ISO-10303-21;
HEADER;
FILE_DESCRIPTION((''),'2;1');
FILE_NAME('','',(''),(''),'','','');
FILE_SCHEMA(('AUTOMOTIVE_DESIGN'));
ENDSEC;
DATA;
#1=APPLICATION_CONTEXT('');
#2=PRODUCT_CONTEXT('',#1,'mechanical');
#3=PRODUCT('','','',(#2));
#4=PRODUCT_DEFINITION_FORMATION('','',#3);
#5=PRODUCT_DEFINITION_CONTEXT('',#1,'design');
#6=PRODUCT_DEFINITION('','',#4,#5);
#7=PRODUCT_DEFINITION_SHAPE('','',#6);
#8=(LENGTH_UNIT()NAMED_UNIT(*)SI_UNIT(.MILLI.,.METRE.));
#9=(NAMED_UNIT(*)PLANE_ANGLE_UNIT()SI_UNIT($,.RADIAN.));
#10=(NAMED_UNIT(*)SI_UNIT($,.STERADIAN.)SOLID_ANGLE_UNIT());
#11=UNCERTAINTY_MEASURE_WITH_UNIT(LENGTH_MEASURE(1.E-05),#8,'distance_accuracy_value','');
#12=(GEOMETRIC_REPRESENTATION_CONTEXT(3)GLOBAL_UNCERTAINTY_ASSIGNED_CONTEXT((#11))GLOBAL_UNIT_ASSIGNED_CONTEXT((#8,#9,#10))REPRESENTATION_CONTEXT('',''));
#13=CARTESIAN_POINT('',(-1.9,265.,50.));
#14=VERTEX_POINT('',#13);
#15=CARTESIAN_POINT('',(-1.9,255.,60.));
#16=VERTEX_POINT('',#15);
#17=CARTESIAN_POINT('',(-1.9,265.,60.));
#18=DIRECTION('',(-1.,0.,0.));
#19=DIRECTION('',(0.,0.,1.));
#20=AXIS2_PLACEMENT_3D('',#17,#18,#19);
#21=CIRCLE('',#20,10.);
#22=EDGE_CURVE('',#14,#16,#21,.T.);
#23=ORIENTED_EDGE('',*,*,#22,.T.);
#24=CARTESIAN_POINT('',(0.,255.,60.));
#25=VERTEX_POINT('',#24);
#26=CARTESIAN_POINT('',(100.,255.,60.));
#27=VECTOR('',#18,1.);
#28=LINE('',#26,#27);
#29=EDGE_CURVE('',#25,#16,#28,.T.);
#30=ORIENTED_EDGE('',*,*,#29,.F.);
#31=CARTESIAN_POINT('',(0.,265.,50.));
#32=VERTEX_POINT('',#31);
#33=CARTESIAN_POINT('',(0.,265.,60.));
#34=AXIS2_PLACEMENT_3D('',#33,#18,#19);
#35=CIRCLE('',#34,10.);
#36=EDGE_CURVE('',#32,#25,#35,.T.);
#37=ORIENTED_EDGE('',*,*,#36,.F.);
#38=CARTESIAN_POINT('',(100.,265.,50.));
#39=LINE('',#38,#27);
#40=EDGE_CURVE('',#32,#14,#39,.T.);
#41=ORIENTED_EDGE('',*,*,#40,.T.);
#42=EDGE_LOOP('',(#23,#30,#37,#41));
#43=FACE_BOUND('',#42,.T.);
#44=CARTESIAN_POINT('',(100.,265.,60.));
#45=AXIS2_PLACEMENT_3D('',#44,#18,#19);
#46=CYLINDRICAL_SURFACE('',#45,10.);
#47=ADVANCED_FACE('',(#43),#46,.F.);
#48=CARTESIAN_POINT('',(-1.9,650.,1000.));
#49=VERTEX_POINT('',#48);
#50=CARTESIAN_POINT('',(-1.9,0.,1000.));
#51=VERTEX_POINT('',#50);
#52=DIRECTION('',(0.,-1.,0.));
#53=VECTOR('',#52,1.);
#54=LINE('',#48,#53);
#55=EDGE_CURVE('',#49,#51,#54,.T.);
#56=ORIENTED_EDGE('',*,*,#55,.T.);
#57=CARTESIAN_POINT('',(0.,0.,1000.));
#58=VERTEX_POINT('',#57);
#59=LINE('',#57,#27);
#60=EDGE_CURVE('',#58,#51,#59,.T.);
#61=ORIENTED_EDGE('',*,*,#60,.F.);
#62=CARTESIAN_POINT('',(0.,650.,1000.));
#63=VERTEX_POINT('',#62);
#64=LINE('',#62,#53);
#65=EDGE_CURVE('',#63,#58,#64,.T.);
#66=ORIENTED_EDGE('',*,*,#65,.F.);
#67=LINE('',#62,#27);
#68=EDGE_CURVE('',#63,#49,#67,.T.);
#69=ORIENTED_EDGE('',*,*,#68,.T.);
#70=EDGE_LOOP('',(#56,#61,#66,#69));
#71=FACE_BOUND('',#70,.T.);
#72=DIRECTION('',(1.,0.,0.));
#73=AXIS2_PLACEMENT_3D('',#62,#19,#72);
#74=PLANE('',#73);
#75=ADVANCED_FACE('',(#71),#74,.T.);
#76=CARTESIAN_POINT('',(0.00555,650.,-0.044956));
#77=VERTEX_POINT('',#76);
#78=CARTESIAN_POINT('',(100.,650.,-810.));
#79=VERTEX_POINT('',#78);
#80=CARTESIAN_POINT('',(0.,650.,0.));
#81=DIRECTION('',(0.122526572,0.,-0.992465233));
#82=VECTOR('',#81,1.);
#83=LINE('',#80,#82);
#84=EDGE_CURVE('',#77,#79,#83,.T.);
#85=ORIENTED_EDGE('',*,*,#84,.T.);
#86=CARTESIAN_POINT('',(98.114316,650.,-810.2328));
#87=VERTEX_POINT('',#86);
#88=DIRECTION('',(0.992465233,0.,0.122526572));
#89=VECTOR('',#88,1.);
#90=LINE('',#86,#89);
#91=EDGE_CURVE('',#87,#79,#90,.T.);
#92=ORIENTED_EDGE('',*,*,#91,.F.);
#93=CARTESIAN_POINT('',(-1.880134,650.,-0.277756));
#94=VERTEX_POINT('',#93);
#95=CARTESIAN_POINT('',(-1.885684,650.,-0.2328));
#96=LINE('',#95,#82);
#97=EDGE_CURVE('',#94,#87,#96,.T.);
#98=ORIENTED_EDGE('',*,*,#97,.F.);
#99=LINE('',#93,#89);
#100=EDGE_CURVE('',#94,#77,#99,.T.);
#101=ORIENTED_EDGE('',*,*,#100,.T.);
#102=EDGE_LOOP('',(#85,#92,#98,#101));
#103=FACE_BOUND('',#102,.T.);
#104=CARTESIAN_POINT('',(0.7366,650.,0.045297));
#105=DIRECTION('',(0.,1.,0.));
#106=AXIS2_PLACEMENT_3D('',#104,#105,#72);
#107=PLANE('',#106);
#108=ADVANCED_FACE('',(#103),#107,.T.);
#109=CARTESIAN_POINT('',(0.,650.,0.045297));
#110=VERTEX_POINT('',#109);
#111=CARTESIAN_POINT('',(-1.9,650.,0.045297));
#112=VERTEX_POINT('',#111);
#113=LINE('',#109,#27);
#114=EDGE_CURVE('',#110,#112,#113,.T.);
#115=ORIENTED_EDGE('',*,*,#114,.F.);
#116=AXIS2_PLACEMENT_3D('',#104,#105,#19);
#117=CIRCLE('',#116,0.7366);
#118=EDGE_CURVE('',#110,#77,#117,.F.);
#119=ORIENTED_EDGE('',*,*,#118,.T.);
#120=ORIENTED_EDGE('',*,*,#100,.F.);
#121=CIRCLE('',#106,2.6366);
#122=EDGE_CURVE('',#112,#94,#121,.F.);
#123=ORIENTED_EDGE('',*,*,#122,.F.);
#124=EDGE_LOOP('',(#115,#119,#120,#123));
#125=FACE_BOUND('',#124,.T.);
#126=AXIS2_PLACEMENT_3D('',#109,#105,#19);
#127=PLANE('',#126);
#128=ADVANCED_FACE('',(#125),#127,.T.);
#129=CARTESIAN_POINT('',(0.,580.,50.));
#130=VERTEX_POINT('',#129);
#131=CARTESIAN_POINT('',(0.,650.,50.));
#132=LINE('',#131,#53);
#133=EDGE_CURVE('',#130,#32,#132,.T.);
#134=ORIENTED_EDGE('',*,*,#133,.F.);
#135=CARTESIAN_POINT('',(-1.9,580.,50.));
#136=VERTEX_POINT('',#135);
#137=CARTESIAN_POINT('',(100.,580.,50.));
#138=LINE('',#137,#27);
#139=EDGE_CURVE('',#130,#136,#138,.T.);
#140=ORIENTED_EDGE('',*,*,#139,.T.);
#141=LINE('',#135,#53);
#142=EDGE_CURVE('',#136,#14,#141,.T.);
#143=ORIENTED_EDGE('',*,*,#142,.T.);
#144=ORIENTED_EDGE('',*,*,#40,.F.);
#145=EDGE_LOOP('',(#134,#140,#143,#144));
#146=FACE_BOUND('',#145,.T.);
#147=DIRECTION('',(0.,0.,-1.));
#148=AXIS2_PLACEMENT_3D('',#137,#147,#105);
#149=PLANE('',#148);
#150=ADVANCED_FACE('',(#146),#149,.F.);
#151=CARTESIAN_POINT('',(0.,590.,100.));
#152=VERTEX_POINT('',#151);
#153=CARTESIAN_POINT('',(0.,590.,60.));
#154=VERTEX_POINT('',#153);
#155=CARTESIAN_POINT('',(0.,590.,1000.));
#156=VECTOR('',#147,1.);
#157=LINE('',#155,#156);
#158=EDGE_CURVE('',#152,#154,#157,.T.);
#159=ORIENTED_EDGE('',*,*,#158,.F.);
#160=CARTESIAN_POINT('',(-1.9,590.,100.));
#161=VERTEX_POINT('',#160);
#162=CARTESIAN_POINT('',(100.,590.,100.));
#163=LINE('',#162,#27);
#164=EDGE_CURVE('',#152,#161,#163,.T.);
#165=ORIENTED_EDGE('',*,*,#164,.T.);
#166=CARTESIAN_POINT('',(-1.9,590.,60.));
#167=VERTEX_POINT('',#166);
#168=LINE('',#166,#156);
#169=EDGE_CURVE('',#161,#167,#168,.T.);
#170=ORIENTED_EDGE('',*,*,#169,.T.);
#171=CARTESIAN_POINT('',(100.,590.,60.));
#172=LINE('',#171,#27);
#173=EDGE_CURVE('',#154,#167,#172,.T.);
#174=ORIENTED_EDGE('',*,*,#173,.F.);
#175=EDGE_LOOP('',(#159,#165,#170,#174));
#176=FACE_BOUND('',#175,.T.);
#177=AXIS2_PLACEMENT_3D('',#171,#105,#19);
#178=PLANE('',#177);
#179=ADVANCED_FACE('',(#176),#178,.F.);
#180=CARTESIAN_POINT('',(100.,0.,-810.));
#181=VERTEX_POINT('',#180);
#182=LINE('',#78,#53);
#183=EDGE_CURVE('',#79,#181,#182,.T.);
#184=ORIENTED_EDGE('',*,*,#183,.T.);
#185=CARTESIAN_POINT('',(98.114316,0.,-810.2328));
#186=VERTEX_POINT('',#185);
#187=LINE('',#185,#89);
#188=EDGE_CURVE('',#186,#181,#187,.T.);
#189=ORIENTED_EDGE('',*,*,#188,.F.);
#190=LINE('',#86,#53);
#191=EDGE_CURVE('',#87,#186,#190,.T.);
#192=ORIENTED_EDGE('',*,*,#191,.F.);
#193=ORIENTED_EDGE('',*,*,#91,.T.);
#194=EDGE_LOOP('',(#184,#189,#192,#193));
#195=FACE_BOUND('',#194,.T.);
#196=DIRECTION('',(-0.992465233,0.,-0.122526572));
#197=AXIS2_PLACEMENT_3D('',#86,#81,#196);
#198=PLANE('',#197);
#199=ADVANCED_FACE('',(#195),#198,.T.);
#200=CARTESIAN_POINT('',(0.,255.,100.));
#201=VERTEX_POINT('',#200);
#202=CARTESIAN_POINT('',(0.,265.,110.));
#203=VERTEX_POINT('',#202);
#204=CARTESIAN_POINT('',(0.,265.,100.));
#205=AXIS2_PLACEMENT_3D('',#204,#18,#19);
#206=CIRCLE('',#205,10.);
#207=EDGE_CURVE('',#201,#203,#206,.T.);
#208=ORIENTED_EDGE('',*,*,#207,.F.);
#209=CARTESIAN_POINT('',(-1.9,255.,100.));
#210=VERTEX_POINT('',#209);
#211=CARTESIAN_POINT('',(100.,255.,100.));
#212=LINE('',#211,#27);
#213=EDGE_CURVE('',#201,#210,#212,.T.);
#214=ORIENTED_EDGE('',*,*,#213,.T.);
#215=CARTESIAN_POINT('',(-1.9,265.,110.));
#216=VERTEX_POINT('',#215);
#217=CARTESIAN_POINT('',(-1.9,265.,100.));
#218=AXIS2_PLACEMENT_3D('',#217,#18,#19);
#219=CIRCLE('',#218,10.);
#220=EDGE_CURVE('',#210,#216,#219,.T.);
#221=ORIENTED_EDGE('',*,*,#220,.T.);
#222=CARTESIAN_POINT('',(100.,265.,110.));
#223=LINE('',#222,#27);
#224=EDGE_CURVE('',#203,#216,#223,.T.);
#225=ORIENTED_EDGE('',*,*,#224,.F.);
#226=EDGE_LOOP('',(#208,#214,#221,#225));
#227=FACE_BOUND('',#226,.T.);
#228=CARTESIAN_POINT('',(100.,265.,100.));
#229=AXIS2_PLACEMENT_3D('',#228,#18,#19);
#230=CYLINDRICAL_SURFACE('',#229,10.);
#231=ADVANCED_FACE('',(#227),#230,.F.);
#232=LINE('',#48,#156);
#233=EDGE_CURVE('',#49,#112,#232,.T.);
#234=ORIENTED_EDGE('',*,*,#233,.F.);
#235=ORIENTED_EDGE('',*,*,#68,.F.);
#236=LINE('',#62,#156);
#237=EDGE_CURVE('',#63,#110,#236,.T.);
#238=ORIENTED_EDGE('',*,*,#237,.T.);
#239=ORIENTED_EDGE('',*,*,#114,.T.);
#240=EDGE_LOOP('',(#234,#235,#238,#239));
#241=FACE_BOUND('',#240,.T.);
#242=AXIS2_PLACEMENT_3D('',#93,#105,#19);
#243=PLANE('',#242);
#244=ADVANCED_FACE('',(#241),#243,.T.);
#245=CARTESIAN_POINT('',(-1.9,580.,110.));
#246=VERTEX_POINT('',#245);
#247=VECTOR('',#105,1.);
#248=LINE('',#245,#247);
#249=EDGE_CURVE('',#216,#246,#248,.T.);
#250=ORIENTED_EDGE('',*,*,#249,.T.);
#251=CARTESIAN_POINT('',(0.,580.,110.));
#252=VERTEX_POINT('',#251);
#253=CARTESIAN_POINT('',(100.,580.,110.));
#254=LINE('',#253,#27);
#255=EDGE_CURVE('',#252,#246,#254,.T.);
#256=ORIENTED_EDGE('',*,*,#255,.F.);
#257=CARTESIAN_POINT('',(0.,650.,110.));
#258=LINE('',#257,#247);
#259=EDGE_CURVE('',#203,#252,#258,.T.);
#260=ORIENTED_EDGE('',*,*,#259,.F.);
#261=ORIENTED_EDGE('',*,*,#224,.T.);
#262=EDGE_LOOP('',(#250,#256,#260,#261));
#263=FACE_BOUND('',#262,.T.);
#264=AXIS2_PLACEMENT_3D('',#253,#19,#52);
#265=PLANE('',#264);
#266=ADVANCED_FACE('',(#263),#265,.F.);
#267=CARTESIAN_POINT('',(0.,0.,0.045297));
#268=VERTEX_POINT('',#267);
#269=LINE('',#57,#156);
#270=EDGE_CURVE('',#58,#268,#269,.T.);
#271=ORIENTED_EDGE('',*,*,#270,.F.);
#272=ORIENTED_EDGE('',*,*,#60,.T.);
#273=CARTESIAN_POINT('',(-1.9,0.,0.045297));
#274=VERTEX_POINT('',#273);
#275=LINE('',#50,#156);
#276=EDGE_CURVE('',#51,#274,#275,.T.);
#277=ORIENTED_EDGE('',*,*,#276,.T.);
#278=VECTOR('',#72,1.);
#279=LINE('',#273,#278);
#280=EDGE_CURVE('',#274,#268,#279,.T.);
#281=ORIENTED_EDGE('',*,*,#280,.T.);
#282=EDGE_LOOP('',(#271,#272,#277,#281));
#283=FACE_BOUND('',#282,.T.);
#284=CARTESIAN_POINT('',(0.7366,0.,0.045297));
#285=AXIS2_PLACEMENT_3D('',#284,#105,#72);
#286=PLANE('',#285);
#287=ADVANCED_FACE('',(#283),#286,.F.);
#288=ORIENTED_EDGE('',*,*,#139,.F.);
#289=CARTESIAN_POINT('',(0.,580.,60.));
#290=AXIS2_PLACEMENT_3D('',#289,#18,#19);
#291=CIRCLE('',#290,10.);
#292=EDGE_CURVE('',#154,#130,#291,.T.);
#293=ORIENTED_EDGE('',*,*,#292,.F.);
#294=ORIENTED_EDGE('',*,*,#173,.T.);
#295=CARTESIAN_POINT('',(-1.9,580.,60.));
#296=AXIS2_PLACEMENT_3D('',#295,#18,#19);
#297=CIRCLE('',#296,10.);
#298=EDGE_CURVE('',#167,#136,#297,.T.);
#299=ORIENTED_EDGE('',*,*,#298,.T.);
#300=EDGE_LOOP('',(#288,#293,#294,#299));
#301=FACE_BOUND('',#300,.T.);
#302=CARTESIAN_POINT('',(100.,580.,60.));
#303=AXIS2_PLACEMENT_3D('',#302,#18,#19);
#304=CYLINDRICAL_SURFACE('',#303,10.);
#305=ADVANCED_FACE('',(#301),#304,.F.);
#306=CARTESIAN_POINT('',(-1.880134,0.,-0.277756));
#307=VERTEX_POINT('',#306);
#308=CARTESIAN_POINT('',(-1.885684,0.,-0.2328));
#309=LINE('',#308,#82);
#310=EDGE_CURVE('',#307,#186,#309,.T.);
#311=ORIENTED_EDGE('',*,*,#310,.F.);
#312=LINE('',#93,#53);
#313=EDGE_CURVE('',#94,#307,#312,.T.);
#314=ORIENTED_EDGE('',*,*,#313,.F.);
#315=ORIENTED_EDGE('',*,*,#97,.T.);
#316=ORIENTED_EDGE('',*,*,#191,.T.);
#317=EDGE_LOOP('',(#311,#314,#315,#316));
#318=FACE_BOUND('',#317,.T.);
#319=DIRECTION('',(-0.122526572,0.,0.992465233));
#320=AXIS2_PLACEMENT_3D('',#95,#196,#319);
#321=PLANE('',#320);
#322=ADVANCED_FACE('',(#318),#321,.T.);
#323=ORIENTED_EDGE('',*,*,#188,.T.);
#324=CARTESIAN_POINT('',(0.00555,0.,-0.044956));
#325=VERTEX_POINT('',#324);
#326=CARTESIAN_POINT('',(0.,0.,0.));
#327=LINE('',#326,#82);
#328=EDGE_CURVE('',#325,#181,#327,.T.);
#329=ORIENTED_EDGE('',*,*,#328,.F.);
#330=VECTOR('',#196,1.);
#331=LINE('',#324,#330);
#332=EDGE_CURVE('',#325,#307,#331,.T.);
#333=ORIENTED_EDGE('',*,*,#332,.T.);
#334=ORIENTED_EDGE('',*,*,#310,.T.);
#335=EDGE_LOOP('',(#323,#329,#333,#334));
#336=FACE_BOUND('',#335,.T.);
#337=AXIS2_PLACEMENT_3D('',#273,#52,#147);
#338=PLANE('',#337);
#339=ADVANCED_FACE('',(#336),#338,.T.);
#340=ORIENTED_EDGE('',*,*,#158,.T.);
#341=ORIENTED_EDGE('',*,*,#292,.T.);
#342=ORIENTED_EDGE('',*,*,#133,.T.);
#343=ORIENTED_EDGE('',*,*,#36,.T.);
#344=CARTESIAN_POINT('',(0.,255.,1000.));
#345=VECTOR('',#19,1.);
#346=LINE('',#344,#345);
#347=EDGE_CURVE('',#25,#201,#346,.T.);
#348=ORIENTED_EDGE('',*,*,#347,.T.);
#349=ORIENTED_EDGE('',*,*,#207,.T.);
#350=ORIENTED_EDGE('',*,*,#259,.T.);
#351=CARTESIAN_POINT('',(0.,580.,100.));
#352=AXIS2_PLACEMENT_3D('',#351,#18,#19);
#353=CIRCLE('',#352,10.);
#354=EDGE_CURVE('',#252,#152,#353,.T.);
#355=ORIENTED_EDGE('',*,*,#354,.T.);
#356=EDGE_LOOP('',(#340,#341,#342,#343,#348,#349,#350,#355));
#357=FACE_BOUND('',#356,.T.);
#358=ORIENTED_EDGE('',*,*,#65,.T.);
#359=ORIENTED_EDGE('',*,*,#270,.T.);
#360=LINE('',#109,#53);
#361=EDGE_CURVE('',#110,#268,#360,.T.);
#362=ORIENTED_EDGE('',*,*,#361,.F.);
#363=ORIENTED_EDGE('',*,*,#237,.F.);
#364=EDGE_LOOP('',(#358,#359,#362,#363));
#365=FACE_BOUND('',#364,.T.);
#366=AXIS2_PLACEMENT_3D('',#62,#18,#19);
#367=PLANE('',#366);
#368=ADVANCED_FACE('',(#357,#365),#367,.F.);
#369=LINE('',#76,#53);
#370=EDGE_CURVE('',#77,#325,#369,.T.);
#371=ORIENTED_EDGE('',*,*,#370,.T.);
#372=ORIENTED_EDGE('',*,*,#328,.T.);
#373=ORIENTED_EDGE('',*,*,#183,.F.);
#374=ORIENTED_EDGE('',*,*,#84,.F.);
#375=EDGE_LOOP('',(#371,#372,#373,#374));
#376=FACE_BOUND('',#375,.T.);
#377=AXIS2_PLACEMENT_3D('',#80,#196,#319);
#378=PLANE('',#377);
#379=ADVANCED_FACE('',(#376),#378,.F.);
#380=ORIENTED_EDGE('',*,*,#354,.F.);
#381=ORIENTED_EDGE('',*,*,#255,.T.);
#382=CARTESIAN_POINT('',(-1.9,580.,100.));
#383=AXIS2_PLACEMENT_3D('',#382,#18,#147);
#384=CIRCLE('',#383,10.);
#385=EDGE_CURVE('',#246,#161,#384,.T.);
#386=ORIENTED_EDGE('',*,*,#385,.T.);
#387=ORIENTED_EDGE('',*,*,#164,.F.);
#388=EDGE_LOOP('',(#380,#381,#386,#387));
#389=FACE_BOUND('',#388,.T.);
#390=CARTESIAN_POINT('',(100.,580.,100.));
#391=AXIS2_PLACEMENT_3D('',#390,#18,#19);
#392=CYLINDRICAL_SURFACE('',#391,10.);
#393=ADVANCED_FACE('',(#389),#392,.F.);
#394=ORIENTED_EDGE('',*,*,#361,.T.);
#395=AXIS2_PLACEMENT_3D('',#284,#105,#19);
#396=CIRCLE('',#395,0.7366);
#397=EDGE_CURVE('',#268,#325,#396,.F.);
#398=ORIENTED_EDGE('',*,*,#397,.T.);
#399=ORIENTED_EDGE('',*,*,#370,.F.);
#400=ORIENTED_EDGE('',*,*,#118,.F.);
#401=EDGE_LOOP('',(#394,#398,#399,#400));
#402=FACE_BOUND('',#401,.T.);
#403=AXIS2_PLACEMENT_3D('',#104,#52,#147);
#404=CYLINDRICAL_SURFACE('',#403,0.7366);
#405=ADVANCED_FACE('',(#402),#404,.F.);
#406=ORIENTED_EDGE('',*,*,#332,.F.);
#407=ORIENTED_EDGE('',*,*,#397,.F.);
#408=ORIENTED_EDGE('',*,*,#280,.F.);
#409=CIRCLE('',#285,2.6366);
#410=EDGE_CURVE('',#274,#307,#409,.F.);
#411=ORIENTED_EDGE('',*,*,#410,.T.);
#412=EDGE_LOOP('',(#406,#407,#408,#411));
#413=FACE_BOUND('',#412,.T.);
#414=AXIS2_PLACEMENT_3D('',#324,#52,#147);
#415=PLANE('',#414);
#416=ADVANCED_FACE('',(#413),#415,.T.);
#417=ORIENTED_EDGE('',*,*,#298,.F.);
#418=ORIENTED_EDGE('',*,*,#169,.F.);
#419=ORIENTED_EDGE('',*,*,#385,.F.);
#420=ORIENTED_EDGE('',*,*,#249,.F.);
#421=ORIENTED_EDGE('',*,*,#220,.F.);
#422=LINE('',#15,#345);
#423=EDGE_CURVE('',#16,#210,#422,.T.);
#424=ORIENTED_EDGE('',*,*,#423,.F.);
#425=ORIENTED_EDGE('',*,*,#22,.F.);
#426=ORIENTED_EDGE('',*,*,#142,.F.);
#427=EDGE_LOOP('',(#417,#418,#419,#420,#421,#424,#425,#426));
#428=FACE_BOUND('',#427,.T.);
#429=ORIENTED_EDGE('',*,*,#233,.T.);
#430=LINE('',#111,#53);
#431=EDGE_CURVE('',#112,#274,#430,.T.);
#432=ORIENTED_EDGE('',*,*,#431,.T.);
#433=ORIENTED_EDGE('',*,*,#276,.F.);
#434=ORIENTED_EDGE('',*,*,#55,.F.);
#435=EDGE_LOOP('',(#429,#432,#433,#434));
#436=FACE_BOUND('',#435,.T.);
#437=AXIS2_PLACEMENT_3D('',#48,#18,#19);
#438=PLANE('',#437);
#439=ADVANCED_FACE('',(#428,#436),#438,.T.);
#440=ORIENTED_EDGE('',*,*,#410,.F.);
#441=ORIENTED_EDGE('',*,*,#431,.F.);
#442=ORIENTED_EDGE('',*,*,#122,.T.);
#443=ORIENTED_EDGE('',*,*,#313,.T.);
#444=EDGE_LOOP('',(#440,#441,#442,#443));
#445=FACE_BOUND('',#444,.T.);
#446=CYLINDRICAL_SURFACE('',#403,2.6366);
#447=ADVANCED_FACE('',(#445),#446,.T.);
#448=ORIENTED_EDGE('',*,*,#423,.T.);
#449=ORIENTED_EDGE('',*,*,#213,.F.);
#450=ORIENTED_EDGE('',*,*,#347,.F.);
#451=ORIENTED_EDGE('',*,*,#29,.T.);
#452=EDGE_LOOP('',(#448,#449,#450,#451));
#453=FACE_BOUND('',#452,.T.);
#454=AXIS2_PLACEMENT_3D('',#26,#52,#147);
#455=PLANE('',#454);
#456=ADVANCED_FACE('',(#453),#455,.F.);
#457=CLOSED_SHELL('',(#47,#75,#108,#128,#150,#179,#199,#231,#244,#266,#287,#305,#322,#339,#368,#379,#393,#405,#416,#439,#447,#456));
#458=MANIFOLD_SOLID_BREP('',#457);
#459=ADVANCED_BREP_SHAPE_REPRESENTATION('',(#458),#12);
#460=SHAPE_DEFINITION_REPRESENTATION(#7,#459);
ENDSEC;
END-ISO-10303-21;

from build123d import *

# Parameters (mm, degrees)
BRIDA_BASE2_DEPTH          = 650
CORTAR_EXTRUIR1_DEPTH      = 1198.031165008
CORTAR_EXTRUIR1_DEPTH_BACK = 1198.031165008


# Sheet-metal steps are written as plain solids
with BuildPart() as part:
    # Croquis1 → Brida base2 (new body)
    with BuildSketch(Plane(origin=(0, 0, 0), x_dir=(1, 0, 0), z_dir=(0, 1, 0))):
        with BuildLine():
            Line((0, -1000), (0, -0.045297188))
            ThreePointArc((0, -0.045297188), (0.001388837, -8.5406e-05), (0.005550109, 0.044955885))
            Line((0.005550109, 0.044955885), (100, 810))
            Line((100, 810), (98.114316057, 810.232800487))
            Line((98.114316057, 810.232800487), (-1.880133834, 0.277756371))
            ThreePointArc((-1.880133834, 0.277756371), (-1.895028772, 0.116534721), (-1.9, -0.045297188))
            Line((-1.9, -0.045297188), (-1.9, -1000))
            Line((-1.9, -1000), (0, -1000))
        make_face()
    extrude(amount=BRIDA_BASE2_DEPTH)

    # Croquis11 → Cortar-Extruir1 (cut, two sides: drawn at the far end of the back side and taken through both)
    with BuildSketch(Plane.ZY.offset(1.9).offset(-CORTAR_EXTRUIR1_DEPTH_BACK)):
        with BuildLine():
            Line((60, 590), (100, 590))
            ThreePointArc((100, 590), (107.071067812, 587.071067812), (110, 580))
            Line((110, 580), (110, 265))
            ThreePointArc((110, 265), (107.071067812, 257.928932188), (100, 255))
            Line((100, 255), (60, 255))
            ThreePointArc((60, 255), (52.928932188, 257.928932188), (50, 265))
            Line((50, 265), (50, 580))
            ThreePointArc((50, 580), (52.928932188, 587.071067812), (60, 590))
        make_face()
    extrude(amount=CORTAR_EXTRUIR1_DEPTH + CORTAR_EXTRUIR1_DEPTH_BACK, mode=Mode.SUBTRACT)


solid = part.part
